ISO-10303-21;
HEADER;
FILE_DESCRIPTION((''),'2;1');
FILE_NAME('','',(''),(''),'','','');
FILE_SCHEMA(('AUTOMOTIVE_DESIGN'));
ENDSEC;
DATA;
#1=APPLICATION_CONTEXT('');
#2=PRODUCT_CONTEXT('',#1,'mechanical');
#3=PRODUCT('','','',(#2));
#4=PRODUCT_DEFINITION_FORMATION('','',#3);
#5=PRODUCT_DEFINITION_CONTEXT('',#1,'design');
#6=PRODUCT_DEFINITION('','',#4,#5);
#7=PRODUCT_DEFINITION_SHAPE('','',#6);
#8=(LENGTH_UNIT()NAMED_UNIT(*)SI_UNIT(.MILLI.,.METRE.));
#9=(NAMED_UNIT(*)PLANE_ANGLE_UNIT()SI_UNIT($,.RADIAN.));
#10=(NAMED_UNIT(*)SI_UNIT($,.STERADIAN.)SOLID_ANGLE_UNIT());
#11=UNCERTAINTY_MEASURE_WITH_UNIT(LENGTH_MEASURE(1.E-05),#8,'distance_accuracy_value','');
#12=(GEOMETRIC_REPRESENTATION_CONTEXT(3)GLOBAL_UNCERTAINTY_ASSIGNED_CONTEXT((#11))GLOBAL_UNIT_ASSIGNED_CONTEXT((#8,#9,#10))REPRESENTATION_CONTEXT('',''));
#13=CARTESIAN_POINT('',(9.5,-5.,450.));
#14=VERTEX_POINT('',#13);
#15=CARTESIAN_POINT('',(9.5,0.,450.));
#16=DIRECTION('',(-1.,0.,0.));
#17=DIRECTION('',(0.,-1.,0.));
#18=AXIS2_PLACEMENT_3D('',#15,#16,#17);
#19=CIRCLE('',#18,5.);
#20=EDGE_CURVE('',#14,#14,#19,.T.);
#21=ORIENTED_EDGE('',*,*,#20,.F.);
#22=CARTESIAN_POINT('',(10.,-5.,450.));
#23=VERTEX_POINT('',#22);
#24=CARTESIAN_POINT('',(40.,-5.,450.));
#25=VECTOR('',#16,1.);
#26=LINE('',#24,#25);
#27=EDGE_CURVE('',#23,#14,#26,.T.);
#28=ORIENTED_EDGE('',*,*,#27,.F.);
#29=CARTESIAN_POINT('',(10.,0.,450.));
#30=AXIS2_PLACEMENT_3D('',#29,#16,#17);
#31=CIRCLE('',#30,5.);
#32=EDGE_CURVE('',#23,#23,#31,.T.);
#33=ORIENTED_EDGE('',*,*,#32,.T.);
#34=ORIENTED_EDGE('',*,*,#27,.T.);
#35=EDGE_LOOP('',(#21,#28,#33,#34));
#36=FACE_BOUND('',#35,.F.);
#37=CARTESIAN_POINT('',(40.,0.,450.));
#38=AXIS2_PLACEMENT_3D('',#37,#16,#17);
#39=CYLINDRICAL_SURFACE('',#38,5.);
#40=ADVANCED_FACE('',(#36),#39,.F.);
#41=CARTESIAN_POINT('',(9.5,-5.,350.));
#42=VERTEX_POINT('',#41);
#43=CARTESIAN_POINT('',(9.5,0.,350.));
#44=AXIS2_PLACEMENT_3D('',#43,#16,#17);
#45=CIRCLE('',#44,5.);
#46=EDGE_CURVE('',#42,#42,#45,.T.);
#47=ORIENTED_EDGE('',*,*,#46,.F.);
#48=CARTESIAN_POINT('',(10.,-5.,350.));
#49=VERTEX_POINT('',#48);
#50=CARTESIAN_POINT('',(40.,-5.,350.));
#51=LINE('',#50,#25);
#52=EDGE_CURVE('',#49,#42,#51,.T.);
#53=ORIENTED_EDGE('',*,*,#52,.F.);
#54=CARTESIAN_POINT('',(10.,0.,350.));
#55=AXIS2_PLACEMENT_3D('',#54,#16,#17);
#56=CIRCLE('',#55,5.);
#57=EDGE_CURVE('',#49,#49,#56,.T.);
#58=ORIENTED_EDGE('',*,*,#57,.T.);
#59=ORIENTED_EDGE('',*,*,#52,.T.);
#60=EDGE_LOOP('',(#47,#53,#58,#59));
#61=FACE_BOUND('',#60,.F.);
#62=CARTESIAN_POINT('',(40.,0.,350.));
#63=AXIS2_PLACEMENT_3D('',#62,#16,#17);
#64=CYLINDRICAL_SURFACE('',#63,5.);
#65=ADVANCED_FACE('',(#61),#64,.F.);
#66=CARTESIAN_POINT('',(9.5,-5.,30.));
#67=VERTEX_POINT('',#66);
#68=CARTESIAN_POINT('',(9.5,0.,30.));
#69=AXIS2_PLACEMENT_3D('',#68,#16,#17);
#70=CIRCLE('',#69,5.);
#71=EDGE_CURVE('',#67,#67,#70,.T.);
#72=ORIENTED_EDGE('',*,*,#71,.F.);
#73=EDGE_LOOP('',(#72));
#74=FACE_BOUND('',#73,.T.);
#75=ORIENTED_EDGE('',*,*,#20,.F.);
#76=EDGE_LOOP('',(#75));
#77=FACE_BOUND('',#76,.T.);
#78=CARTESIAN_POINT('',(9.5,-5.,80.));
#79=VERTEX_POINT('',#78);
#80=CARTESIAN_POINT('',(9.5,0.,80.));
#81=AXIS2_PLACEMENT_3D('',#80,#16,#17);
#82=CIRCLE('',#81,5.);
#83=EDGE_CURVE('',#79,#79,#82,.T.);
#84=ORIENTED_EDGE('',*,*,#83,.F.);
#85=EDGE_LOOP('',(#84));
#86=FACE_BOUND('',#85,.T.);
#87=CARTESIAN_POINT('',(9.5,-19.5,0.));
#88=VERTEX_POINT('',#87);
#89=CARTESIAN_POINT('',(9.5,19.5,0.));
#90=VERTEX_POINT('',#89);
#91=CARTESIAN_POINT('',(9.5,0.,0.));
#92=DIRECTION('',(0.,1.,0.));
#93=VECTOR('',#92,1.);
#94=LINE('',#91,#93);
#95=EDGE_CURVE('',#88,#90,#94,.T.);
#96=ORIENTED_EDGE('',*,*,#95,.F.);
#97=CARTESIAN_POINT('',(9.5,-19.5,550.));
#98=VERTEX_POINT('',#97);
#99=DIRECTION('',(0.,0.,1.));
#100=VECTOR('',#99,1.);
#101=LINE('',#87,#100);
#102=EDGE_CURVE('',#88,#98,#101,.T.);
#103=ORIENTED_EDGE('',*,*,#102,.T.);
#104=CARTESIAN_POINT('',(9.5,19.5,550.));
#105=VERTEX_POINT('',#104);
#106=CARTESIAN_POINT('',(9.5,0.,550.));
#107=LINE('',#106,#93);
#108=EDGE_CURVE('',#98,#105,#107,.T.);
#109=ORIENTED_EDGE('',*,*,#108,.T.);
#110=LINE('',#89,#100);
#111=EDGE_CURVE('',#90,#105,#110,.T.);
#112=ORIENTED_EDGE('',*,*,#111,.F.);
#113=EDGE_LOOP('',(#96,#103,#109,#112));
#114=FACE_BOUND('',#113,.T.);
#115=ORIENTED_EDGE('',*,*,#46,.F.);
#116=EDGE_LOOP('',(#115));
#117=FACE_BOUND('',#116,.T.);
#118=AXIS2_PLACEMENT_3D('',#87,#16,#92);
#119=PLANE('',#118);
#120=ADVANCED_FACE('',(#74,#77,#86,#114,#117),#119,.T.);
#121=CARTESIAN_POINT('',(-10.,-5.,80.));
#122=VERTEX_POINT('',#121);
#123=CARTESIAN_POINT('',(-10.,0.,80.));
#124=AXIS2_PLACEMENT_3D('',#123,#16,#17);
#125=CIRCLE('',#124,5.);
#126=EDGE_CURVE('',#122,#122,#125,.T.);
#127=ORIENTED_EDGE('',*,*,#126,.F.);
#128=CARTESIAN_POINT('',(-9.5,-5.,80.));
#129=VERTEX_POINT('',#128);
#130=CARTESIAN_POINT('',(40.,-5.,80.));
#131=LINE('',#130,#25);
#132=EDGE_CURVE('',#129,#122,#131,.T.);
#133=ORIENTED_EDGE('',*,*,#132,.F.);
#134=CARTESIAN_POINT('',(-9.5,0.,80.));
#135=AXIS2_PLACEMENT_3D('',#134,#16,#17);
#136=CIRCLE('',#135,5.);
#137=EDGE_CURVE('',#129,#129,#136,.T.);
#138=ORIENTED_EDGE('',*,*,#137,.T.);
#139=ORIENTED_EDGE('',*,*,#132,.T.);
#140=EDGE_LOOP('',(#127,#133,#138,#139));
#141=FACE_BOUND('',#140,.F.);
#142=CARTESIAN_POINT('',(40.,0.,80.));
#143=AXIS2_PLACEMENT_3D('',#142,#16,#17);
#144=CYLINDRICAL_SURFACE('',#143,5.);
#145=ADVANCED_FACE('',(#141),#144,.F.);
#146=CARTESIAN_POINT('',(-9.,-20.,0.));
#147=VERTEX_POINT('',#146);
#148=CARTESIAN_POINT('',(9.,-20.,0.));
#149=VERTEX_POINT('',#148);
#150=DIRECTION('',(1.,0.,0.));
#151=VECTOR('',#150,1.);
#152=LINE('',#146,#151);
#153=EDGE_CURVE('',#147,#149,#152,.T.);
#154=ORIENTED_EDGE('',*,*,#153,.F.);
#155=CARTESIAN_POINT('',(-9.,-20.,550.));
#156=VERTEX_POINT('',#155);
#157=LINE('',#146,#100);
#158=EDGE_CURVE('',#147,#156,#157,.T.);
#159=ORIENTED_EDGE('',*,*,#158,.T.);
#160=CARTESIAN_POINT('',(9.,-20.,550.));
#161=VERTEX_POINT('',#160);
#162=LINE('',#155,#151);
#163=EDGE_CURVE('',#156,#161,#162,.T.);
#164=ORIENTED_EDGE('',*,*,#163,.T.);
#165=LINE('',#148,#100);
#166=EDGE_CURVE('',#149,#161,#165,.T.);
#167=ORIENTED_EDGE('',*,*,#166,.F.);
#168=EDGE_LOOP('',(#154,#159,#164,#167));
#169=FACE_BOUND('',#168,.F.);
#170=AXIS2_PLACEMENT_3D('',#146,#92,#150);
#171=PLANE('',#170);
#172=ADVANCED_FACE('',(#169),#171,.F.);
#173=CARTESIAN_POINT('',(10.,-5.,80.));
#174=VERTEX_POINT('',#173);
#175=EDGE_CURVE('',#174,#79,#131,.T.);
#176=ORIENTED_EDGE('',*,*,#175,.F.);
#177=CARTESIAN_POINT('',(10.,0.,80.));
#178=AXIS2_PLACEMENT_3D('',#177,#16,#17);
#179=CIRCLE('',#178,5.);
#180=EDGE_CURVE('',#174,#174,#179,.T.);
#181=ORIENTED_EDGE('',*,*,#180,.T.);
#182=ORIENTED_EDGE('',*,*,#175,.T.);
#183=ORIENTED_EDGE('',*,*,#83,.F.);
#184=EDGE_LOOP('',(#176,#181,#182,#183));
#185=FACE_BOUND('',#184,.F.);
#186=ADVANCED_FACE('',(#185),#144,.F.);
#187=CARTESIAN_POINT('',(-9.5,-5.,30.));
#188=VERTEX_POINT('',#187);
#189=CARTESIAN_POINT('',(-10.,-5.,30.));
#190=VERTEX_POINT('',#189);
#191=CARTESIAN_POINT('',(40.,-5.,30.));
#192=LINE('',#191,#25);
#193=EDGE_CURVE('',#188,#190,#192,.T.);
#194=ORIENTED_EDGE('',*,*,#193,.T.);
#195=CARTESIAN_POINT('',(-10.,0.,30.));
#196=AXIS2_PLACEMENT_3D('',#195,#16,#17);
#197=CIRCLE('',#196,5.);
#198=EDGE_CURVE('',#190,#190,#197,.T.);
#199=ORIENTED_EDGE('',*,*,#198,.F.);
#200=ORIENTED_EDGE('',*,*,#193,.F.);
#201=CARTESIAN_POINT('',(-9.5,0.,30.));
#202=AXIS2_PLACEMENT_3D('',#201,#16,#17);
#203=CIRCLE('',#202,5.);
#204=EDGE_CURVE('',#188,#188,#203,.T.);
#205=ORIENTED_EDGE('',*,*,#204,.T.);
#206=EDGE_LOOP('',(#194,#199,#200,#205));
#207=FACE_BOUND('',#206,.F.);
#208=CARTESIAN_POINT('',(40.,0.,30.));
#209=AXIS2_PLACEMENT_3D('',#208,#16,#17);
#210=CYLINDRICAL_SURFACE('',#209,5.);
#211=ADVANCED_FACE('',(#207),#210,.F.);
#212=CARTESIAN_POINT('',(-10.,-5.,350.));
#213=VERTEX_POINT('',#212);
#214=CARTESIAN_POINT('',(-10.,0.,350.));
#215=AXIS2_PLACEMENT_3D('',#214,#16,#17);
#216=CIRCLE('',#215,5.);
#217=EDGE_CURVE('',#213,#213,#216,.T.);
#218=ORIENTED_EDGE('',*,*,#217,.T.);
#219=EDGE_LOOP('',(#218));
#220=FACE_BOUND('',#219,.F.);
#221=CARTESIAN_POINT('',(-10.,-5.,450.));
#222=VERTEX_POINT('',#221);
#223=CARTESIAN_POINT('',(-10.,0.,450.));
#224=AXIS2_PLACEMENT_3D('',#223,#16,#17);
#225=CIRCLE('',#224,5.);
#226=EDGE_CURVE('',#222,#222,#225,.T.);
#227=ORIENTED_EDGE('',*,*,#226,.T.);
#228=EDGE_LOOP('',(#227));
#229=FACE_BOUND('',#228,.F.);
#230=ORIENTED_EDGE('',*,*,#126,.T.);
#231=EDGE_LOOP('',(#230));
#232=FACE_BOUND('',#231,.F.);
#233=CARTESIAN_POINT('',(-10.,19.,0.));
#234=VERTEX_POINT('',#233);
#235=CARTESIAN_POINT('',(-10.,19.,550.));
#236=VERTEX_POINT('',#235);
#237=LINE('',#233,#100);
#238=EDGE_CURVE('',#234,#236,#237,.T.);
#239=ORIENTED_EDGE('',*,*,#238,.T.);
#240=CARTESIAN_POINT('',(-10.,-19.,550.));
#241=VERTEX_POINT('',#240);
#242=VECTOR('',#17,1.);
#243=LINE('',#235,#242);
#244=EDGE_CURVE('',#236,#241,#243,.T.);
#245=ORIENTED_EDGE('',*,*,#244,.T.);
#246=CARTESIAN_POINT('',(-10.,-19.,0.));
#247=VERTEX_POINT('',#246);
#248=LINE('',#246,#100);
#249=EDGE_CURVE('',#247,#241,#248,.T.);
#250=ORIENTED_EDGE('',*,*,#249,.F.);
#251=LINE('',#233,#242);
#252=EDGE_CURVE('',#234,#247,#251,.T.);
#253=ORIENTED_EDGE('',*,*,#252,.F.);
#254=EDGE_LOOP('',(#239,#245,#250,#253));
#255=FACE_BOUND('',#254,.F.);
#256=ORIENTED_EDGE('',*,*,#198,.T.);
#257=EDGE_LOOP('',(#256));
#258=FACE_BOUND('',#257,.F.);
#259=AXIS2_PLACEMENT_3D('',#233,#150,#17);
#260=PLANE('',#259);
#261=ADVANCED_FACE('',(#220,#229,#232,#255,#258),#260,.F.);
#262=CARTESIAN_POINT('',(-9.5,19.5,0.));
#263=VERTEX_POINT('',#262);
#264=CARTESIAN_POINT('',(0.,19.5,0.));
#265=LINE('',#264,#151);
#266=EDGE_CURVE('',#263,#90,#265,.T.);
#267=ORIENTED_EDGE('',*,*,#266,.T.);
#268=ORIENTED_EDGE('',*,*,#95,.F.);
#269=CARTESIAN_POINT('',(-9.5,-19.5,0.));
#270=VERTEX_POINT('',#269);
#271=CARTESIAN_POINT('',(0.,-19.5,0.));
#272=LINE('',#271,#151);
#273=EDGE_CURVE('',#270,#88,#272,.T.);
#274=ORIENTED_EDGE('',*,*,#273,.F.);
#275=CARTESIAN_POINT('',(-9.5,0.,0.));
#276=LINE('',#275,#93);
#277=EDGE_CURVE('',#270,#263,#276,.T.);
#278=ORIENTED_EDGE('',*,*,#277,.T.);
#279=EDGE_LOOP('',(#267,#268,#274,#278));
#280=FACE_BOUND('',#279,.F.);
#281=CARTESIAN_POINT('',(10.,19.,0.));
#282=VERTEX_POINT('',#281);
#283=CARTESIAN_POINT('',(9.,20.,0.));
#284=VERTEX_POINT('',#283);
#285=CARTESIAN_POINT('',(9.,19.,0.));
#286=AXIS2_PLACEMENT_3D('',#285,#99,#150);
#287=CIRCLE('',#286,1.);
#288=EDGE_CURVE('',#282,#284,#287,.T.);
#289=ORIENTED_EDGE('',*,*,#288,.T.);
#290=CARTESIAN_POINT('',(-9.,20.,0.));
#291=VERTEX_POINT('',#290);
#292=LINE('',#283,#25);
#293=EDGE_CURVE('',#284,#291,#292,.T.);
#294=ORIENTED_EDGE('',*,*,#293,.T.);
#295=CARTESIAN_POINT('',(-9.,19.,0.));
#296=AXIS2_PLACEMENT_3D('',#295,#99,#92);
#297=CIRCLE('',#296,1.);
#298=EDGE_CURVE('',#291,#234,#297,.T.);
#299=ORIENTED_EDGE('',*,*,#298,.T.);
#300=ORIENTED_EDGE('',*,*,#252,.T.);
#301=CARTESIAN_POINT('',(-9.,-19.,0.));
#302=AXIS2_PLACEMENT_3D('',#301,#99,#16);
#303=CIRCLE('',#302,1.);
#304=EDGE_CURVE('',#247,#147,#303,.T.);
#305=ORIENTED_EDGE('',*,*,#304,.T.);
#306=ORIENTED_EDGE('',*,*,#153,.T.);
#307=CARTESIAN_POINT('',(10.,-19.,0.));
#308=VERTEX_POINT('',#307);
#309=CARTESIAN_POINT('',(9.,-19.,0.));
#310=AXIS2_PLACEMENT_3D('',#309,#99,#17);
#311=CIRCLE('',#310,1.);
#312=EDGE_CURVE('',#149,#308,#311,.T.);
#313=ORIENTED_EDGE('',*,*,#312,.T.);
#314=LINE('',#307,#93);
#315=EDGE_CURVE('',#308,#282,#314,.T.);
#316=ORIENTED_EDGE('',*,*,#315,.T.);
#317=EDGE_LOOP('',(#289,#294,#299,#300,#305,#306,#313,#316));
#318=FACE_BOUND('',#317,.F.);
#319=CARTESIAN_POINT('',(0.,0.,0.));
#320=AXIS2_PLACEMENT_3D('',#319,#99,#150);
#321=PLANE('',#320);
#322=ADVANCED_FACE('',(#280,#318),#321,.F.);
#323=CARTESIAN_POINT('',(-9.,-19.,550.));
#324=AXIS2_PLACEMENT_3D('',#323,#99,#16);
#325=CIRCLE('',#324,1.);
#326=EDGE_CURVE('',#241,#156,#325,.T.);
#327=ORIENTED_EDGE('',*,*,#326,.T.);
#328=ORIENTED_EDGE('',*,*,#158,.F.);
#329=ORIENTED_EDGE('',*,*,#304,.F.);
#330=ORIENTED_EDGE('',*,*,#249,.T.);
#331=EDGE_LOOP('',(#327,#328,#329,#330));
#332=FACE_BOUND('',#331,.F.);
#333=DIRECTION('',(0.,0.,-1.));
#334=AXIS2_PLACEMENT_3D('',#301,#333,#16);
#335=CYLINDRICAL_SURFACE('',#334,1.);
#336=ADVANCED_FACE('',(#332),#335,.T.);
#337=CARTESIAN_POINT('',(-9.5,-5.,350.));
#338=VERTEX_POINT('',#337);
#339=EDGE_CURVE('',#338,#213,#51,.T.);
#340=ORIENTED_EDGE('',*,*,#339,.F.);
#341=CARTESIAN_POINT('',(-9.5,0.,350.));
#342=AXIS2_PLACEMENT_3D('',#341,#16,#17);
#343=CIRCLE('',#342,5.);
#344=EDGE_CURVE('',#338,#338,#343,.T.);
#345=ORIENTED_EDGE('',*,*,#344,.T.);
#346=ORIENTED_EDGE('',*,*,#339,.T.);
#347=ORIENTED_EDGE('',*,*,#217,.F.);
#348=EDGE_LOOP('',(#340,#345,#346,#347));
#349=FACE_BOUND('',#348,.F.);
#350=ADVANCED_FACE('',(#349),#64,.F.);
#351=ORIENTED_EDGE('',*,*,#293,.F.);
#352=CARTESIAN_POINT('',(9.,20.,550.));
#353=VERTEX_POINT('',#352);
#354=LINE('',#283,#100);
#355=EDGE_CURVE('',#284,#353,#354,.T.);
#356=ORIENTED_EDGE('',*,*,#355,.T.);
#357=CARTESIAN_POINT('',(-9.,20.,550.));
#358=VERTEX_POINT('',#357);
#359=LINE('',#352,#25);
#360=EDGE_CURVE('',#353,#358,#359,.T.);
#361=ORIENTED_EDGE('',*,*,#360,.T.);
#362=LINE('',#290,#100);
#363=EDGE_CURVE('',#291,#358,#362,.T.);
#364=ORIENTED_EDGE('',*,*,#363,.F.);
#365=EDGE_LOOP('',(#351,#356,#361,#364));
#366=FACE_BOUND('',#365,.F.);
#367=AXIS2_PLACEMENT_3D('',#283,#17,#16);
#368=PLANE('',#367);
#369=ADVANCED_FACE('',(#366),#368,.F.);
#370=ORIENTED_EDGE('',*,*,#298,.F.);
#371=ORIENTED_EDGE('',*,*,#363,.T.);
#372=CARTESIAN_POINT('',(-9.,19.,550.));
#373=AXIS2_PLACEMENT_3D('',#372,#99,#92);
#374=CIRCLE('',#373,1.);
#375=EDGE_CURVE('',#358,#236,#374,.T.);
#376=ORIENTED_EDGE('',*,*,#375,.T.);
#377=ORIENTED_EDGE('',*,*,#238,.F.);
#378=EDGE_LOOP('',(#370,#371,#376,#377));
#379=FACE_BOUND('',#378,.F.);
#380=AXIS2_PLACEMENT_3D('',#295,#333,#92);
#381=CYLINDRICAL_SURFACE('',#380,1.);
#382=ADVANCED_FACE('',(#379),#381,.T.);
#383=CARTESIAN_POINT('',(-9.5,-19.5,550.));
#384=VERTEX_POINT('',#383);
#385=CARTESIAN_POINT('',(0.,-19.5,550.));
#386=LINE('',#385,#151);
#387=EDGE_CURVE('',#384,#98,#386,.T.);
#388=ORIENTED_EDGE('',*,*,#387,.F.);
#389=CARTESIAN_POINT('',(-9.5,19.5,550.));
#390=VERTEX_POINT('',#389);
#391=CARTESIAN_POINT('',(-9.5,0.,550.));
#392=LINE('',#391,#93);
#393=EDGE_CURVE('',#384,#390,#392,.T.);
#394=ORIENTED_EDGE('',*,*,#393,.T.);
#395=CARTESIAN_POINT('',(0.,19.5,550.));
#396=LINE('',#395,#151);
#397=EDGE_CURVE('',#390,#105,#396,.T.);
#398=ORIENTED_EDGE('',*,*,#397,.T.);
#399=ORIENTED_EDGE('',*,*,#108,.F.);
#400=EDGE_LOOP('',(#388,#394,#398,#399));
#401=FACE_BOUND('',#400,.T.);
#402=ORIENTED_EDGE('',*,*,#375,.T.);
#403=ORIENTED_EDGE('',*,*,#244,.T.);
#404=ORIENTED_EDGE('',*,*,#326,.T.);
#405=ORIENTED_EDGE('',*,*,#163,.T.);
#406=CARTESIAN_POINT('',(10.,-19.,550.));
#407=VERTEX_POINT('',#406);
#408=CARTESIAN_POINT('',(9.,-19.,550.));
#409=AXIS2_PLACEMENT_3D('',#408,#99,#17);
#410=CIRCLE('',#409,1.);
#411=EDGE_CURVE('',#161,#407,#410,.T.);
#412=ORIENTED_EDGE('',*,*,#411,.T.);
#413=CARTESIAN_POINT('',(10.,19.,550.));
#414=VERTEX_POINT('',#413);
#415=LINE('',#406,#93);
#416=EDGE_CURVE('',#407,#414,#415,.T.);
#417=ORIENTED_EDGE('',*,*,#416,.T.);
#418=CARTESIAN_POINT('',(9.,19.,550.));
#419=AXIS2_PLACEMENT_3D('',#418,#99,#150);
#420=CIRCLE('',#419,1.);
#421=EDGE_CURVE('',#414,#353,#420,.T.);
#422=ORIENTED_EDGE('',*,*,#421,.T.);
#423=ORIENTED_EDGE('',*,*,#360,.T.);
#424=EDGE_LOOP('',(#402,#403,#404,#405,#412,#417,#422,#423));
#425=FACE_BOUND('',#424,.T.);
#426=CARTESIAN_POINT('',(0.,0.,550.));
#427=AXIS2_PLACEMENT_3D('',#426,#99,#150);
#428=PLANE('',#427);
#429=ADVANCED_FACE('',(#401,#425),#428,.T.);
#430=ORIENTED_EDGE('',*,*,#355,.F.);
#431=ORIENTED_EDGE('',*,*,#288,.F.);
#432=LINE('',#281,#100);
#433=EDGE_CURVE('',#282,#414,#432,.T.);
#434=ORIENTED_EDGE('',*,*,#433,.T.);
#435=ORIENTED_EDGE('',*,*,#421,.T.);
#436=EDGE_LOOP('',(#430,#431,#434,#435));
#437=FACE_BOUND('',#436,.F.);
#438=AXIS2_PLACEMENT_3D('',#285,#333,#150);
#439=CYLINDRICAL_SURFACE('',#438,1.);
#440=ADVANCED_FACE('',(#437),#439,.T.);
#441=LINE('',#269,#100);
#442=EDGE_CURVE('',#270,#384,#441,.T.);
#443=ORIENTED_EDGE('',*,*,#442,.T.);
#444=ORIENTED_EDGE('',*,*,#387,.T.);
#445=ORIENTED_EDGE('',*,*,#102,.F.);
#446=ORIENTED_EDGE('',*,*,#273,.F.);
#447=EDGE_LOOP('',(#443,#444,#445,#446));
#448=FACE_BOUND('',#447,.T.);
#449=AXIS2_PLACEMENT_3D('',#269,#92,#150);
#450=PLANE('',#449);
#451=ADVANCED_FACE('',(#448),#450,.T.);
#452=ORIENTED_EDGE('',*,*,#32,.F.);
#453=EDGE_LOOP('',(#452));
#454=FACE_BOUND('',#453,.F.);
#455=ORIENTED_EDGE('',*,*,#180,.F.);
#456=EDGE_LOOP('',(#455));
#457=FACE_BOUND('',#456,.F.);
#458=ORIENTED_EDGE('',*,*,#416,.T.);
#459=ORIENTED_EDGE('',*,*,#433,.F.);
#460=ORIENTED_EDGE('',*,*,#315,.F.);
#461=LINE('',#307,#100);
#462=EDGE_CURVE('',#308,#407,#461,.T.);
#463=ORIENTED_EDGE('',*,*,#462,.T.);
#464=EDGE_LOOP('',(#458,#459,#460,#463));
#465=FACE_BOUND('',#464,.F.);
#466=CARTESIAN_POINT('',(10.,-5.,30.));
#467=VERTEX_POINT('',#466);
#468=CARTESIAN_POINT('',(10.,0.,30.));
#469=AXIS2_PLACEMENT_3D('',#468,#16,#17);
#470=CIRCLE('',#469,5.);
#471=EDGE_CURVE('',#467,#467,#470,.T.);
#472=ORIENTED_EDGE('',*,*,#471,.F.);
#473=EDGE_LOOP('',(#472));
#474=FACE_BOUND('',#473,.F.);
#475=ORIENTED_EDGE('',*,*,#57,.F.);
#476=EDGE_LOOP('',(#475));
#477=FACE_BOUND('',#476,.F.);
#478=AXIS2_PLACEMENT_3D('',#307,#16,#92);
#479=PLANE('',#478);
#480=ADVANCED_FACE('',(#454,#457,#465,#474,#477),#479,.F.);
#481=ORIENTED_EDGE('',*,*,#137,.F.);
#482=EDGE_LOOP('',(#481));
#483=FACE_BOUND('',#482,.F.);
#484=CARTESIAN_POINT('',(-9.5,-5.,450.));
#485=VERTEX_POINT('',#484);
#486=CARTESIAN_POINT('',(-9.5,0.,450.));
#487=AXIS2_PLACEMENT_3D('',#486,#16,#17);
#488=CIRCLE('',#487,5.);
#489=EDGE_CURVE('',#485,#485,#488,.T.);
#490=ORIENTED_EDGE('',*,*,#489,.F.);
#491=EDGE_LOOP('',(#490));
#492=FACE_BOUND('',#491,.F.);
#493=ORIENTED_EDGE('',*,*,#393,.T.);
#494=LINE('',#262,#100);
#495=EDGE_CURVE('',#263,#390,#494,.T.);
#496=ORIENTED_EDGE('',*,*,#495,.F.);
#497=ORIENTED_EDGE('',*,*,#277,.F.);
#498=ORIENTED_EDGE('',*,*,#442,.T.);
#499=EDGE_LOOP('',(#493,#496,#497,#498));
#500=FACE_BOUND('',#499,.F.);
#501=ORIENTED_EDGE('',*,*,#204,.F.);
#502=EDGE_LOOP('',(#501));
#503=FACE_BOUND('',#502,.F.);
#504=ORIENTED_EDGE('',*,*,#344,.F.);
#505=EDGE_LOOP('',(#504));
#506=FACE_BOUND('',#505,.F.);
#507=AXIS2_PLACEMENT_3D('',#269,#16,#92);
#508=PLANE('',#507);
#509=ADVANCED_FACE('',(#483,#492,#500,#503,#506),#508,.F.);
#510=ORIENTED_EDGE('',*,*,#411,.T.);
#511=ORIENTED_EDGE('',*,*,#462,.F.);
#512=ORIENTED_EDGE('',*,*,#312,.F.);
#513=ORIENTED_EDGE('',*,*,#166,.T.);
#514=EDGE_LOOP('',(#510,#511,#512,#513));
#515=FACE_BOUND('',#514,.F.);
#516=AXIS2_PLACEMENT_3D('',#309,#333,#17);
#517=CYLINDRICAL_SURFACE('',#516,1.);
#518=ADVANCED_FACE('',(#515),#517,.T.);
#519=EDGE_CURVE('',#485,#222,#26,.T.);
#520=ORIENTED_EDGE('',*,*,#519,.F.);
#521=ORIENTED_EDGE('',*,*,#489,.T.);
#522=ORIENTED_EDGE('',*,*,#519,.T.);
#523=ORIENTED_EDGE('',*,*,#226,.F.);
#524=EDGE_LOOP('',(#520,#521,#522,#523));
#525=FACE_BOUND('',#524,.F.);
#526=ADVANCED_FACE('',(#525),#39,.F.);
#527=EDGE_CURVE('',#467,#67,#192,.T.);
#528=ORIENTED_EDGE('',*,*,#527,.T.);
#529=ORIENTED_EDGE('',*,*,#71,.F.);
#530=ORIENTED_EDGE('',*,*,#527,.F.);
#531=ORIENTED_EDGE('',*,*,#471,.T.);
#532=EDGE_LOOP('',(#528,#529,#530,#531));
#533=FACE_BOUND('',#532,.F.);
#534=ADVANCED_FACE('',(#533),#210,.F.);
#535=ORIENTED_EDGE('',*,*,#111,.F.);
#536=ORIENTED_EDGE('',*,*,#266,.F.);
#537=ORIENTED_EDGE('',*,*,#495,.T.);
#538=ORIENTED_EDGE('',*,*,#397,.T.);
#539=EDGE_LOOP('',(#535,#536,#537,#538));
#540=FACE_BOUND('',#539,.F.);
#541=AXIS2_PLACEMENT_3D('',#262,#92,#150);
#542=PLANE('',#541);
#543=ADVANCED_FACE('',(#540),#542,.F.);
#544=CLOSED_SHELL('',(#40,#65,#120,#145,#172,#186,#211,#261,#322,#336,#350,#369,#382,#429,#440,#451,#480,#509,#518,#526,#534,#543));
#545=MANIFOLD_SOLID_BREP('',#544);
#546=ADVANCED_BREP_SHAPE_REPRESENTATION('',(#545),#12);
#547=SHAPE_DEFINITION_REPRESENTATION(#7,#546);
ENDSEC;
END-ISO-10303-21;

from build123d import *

# Parameters (mm, degrees)
F0_W     = 19
F0_H     = 39
F1_DEPTH = 550
F3_D     = 10
F3_DEPTH = 30
F3_TIP   = 3.0043030951


# Not quite as in the source:
# - a feature names something its author has since deleted; it is built from what else it names


with BuildPart() as f1:
    # F0 (on Top) → F1 (new body)
    with BuildSketch(Plane.XY):
        with BuildLine():
            Line((9, 20), (-9, 20))
            ThreePointArc((-9, 20), (-9.7071067812, 19.7071067812), (-10, 19))
            Line((-10, 19), (-10, -19))
            ThreePointArc((-10, -19), (-9.7071067812, -19.7071067812), (-9, -20))
            Line((-9, -20), (9, -20))
            ThreePointArc((9, -20), (9.7071067812, -19.7071067812), (10, -19))
            Line((10, -19), (10, 19))
            ThreePointArc((10, 19), (9.7071067812, 19.7071067812), (9, 20))
        make_face()
        Rectangle(F0_W, F0_H, mode=Mode.SUBTRACT)
    extrude(amount=F1_DEPTH)

    # F3
    with Locations(Plane.YZ.offset(10)):
        with Locations((0, 80), (0, 30), (0, 450), (0, 350)):
            Hole(F3_D / 2, depth=F3_DEPTH)
            with Locations((0, 0, -(F3_DEPTH + F3_TIP / 2))):  # 118° drill point
                Cone(0, F3_D / 2, F3_TIP, mode=Mode.SUBTRACT)


solid = f1.part
